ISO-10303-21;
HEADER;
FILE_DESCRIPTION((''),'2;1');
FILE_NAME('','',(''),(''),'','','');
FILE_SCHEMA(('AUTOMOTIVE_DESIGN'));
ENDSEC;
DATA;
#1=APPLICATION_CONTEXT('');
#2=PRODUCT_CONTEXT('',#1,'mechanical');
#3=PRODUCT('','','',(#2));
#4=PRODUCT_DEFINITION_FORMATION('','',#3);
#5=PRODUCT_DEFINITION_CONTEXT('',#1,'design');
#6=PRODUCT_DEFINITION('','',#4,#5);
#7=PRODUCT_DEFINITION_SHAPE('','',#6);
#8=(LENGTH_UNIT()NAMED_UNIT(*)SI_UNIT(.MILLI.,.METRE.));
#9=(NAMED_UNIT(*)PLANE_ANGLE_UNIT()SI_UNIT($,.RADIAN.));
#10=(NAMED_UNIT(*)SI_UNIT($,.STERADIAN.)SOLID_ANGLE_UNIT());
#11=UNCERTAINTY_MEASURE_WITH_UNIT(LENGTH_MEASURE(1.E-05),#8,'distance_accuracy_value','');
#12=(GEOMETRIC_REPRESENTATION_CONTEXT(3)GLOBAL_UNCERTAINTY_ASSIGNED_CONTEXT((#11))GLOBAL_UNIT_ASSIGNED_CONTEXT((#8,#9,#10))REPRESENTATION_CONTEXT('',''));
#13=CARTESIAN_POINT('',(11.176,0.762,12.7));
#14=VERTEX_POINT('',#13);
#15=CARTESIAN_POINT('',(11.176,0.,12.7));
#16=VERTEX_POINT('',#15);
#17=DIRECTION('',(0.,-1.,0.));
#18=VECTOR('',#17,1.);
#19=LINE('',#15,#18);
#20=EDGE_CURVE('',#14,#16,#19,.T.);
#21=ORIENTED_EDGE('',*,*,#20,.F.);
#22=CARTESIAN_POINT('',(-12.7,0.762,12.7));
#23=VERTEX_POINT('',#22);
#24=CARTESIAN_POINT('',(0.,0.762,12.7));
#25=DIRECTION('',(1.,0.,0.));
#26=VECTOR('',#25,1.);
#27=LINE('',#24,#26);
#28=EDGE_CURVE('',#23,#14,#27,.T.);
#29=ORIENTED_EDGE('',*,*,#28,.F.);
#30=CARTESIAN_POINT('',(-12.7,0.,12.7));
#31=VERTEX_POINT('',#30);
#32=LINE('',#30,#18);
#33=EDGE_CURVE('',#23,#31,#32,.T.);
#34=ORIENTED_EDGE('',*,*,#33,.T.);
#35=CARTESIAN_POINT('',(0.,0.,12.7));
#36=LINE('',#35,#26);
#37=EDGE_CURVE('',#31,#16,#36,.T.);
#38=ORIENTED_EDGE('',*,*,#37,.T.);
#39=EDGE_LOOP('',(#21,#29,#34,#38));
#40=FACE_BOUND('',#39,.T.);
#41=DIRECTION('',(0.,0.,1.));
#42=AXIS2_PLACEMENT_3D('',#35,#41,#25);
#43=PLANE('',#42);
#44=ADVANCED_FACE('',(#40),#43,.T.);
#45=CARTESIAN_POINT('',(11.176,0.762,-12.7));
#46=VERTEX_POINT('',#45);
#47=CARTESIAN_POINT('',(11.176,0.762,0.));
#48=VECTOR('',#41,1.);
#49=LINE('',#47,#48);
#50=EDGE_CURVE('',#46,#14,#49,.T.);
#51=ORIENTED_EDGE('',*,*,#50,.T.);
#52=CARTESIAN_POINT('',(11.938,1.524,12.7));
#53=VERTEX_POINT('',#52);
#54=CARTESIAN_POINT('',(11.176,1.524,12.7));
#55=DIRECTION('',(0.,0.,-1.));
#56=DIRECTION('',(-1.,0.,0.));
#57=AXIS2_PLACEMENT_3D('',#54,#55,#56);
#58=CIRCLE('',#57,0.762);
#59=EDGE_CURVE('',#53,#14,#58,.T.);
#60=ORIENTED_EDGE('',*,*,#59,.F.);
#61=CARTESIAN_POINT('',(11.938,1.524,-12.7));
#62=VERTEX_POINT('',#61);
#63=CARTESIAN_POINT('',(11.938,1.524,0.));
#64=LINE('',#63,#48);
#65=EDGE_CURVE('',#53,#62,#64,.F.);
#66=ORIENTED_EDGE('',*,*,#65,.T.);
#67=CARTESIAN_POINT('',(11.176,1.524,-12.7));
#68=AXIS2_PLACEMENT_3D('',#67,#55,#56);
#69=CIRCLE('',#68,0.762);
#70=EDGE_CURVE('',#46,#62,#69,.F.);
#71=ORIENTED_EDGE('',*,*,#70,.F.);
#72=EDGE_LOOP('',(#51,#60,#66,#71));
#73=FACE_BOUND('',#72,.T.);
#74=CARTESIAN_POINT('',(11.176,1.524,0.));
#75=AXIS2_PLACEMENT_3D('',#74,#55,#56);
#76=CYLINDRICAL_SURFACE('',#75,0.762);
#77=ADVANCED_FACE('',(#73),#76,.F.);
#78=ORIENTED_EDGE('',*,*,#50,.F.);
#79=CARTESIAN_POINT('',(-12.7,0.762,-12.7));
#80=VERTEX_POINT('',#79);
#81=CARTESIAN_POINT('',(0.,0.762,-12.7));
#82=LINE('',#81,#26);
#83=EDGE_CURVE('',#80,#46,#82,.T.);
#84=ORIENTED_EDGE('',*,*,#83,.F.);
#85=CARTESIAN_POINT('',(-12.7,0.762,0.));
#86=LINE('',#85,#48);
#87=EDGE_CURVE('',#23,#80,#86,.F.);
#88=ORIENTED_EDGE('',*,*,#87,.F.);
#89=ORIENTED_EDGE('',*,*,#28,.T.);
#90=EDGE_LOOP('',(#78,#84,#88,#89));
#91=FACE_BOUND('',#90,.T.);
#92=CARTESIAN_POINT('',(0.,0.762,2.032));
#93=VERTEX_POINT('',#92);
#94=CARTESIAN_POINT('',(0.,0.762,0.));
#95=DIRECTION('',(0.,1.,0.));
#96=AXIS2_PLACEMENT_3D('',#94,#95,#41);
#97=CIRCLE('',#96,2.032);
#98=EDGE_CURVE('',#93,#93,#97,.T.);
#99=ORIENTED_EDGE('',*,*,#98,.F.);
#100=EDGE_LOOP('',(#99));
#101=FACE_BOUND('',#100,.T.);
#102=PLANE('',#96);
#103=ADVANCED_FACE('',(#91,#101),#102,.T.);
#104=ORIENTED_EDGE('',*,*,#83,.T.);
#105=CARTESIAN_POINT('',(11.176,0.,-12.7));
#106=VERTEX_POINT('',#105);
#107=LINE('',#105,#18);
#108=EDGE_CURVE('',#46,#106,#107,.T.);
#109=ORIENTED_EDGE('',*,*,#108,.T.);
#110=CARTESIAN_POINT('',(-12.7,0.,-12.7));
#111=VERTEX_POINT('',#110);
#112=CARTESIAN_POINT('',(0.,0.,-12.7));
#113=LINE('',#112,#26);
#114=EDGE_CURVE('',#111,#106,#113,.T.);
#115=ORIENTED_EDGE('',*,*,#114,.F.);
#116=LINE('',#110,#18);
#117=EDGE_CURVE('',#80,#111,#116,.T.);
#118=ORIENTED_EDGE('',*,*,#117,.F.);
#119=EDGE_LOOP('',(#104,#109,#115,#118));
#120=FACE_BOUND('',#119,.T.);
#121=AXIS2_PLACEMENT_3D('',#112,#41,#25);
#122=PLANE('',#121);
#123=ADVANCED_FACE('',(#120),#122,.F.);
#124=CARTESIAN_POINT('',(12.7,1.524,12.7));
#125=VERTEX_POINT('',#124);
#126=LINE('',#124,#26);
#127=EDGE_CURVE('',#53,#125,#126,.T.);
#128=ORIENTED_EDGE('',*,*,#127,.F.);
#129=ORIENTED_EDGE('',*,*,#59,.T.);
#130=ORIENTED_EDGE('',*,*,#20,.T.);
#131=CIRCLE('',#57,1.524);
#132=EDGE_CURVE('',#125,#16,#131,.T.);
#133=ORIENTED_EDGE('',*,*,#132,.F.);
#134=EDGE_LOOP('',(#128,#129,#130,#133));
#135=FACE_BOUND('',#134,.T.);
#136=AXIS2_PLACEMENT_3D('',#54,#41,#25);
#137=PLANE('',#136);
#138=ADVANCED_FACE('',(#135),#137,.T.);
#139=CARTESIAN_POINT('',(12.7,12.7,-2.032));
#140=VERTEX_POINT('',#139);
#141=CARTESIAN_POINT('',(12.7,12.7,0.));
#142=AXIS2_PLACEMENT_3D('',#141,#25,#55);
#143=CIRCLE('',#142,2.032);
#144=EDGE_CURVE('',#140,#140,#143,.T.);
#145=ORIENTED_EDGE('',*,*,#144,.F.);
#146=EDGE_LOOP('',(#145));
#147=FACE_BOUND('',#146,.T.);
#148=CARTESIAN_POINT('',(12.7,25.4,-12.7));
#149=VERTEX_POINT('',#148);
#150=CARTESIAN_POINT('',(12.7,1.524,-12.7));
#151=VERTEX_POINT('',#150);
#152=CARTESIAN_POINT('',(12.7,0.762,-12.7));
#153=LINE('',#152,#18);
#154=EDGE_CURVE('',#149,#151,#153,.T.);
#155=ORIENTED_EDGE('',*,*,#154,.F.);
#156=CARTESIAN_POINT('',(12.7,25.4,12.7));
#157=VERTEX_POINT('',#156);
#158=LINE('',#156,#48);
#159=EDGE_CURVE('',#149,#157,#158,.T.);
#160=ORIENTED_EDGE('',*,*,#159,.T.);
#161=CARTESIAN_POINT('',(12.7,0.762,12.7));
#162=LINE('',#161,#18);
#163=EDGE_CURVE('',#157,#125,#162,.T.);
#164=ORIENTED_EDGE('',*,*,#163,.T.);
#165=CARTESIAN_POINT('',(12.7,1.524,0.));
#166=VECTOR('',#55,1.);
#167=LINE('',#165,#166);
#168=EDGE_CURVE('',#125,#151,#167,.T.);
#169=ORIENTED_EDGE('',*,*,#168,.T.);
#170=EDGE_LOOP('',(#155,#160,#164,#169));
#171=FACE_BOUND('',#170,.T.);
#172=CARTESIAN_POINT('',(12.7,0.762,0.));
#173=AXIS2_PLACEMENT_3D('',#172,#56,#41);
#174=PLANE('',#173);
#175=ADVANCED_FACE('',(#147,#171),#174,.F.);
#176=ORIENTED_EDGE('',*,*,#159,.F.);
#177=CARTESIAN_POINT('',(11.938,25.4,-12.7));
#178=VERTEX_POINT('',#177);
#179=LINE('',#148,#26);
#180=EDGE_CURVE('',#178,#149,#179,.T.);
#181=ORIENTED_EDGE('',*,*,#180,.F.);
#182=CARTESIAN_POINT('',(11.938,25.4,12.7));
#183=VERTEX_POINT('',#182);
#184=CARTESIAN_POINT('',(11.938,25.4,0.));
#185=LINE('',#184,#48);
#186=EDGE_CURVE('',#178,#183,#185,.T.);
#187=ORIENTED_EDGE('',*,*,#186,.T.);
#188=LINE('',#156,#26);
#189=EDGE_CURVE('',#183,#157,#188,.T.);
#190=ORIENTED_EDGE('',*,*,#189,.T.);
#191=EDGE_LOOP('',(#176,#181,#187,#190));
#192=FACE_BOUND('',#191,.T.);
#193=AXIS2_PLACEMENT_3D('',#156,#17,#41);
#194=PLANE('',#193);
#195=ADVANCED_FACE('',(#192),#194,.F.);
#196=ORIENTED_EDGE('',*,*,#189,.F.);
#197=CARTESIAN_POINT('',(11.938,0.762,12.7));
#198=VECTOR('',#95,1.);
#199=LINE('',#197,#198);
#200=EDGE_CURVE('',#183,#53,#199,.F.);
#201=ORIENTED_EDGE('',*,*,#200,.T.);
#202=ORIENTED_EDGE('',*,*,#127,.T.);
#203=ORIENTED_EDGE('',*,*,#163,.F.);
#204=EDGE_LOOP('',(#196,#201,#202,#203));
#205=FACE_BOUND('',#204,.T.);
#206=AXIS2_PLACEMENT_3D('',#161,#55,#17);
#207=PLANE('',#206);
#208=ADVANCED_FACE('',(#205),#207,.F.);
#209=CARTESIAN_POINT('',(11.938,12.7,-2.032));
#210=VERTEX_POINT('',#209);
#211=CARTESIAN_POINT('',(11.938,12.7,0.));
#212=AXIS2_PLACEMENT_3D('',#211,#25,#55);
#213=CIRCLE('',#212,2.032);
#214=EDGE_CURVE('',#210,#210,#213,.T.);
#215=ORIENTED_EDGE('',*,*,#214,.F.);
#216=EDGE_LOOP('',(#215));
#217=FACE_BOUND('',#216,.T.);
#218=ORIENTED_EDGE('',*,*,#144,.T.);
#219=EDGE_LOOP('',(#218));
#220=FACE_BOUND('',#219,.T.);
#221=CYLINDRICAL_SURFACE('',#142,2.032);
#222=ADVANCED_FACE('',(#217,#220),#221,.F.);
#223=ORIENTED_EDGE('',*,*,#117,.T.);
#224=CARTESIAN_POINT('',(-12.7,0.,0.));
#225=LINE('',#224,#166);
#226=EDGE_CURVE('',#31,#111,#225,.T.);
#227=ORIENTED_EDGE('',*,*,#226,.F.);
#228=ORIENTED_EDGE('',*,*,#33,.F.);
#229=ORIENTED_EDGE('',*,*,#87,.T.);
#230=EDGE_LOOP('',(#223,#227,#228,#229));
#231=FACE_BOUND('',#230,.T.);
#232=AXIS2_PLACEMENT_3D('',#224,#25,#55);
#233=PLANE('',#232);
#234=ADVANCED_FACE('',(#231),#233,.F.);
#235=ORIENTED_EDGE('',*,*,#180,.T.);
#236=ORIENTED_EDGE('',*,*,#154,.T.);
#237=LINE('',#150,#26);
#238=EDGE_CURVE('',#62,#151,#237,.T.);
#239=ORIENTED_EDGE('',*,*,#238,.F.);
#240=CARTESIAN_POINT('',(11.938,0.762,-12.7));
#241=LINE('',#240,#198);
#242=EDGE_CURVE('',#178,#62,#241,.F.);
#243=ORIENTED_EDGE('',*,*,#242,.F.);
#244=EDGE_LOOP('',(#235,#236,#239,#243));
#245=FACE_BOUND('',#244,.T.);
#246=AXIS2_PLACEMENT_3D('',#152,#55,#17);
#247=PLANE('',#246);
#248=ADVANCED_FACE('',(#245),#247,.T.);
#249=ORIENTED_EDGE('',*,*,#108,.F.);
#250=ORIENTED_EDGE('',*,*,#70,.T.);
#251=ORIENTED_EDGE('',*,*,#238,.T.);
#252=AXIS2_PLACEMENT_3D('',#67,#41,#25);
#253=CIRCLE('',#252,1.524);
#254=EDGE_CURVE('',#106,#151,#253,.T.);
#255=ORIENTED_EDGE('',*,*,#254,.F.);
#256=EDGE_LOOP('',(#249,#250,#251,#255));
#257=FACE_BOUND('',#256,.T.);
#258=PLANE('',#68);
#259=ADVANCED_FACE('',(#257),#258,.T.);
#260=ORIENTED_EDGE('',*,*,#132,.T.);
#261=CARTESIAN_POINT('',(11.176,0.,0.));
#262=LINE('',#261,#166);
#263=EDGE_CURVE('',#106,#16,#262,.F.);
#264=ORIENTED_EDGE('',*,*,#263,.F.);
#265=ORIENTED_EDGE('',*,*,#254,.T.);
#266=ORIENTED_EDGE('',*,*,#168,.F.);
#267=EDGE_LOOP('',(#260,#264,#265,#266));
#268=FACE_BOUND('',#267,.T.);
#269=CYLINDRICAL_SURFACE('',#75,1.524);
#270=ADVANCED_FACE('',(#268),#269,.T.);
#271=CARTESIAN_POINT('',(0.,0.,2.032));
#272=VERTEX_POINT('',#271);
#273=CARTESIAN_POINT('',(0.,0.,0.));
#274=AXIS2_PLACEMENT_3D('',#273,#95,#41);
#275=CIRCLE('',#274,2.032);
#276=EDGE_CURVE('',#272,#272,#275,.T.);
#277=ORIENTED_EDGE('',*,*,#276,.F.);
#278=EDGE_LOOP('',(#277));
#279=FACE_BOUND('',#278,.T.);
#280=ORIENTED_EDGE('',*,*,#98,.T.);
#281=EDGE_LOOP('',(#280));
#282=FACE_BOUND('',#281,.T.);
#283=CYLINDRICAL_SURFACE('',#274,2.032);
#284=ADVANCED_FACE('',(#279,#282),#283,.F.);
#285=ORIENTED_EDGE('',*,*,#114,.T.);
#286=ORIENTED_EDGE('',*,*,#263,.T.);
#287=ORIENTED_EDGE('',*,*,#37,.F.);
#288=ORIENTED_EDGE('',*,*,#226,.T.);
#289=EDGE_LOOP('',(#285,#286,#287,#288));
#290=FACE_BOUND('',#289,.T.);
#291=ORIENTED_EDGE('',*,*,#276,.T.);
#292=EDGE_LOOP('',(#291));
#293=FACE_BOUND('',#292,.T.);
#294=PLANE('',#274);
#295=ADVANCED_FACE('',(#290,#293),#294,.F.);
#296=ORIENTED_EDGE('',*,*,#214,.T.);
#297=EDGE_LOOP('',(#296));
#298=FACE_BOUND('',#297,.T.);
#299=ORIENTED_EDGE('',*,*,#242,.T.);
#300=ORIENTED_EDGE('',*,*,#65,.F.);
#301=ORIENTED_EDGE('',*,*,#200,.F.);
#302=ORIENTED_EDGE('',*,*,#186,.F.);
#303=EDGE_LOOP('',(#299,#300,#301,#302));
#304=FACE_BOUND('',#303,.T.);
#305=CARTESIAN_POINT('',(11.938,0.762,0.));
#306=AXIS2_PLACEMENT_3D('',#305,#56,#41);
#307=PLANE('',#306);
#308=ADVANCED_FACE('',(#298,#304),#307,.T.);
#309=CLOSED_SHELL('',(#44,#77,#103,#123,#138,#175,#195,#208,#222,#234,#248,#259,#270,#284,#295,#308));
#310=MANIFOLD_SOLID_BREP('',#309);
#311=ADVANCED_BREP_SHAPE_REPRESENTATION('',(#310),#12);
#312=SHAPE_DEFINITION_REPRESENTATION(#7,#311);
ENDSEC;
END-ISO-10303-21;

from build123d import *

# Parameters (mm, degrees)
SKETCH1_W              = 25.4
SKETCH1_H              = 25.4
SKETCH1_R              = 2.032
BOSS_EXTRUDE1_DEPTH    = 0.762
SKETCH2_W              = 25.4
SKETCH2_H              = 25.4
SKETCH2_R              = 2.032
BOSS_EXTRUDE2_DEPTH    = 0.762
CONVERT_SOLID1_START   = -12.7
CONVERT_SOLID1_DEPTH   = 25.4
CONVERT_SOLID1_2_DEPTH = 25.4


# Read off the part's stored shape, not the designer's step: Convert-Solid1
with BuildPart() as part:
    # Sketch1 → Boss-Extrude1 (new body)
    with BuildSketch(Plane(origin=(0, 0, 0), x_dir=(1, 0, 0), z_dir=(0, 1, 0))):
        Rectangle(SKETCH1_W, SKETCH1_H)
        with Locations(Location((0, 0, 0), (0, 0, 90))):
            Circle(SKETCH1_R, mode=Mode.SUBTRACT)
    extrude(amount=BOSS_EXTRUDE1_DEPTH)

    # Sketch2 → Boss-Extrude2 (add)
    with BuildSketch(Plane(origin=(12.7, 0, 0), x_dir=(0, 0, -1), z_dir=(1, 0, 0))):
        with Locations((0, 12.7)):
            Rectangle(SKETCH2_W, SKETCH2_H)
        with Locations((0, 12.7)):
            Circle(SKETCH2_R, mode=Mode.SUBTRACT)
    extrude(amount=-BOSS_EXTRUDE2_DEPTH)

    # Convert-Solid1 outline → Convert-Solid1 (cut)
    with BuildSketch(Plane.XY.offset(CONVERT_SOLID1_START)):
        with BuildLine():
            Line((12.7, 0), (12.7, 1.524))
            ThreePointArc((12.7, 1.524), (12.253630735, 0.446369265), (11.176, 0))
            Line((11.176, 0), (12.7, 0))
        make_face()
    extrude(amount=CONVERT_SOLID1_DEPTH, mode=Mode.SUBTRACT)

    # Convert-Solid1 2 outline → Convert-Solid1 2 (add)
    with BuildSketch(Plane.XY.offset(CONVERT_SOLID1_START)):
        with BuildLine():
            Line((11.938, 0.762), (11.938, 1.524))
            ThreePointArc((11.938, 1.524), (11.714815367, 0.985184633), (11.176, 0.762))
            Line((11.176, 0.762), (11.938, 0.762))
        make_face()
    extrude(amount=CONVERT_SOLID1_2_DEPTH)


solid = part.part
